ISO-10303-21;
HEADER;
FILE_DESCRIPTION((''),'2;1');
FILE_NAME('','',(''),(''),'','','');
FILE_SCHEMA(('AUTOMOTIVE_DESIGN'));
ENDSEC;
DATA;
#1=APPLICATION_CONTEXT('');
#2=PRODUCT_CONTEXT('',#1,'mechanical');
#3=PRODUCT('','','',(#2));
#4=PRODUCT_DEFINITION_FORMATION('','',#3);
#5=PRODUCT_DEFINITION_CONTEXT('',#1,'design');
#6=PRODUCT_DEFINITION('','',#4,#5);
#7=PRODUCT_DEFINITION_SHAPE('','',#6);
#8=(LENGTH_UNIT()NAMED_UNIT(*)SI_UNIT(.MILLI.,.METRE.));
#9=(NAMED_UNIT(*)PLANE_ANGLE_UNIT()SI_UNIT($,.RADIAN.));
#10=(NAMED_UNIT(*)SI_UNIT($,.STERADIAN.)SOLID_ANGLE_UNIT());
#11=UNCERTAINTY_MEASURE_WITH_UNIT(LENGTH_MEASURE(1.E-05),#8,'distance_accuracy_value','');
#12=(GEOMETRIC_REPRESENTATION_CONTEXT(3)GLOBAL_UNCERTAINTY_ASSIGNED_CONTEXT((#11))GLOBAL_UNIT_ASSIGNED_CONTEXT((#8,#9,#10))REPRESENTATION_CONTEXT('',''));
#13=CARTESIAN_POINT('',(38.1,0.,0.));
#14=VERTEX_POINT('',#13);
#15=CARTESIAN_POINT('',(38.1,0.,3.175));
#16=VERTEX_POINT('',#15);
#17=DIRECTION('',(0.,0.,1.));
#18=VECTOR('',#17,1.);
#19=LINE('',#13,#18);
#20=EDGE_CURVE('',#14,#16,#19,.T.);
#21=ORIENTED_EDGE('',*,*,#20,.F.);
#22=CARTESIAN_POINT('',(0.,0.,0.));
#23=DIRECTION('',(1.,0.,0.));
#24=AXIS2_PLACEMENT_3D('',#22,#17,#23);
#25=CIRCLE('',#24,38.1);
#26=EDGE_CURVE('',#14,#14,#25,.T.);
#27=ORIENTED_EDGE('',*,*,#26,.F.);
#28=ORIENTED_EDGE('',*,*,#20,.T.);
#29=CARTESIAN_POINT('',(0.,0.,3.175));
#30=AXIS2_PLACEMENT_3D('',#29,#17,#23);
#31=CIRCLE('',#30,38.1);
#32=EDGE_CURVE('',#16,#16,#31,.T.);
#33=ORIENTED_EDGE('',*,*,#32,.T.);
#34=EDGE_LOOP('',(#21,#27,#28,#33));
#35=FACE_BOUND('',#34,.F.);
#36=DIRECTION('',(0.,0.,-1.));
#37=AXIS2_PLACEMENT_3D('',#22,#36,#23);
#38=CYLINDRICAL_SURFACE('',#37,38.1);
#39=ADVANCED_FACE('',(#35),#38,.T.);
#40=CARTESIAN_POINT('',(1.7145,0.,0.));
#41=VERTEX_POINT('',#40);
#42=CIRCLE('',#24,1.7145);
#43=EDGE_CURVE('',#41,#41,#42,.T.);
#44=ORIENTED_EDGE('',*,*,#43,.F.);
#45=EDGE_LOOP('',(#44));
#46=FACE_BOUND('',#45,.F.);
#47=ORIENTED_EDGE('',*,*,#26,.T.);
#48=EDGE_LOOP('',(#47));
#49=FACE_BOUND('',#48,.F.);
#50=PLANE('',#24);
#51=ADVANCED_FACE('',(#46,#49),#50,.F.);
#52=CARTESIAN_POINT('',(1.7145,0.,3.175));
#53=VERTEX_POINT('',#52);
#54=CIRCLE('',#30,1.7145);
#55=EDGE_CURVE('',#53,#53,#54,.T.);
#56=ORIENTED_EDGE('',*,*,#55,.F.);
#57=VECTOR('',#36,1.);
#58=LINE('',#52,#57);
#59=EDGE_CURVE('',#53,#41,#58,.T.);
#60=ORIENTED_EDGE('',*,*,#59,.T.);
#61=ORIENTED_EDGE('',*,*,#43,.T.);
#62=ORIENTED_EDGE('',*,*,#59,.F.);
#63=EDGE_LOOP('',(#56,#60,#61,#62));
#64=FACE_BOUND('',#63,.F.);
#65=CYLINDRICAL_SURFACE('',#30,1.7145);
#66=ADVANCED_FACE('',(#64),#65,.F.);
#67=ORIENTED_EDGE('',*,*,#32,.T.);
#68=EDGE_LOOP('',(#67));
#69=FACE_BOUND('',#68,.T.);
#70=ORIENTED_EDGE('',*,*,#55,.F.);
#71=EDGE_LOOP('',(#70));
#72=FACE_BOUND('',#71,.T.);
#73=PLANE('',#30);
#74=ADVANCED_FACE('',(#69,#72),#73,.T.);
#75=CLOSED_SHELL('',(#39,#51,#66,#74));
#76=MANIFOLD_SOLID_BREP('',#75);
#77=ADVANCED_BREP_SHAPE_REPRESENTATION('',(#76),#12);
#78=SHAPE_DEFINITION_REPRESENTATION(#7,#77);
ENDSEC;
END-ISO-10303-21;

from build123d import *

# Parameters (mm, degrees)
F0_R     = 38.1
F1_DEPTH = 3.175
F2_R     = 1.7145
F3_DEPTH = 3.176


# Not quite as in the source:
# - a length typed as a fraction of an inch, garbled in the dataset ("3 / 203.2 mm" for 3/8 in), is restored


with BuildPart() as f1:
    # F0 (on Top) → F1 (new body)
    with BuildSketch(Plane.XY):
        Circle(F0_R)
    extrude(amount=F1_DEPTH)

    # F2 (on face) → F3 (cut, through all)
    with BuildSketch(Plane.XY.offset(3.175)):
        Circle(F2_R)
    extrude(amount=-F3_DEPTH, mode=Mode.SUBTRACT)


solid = f1.part
